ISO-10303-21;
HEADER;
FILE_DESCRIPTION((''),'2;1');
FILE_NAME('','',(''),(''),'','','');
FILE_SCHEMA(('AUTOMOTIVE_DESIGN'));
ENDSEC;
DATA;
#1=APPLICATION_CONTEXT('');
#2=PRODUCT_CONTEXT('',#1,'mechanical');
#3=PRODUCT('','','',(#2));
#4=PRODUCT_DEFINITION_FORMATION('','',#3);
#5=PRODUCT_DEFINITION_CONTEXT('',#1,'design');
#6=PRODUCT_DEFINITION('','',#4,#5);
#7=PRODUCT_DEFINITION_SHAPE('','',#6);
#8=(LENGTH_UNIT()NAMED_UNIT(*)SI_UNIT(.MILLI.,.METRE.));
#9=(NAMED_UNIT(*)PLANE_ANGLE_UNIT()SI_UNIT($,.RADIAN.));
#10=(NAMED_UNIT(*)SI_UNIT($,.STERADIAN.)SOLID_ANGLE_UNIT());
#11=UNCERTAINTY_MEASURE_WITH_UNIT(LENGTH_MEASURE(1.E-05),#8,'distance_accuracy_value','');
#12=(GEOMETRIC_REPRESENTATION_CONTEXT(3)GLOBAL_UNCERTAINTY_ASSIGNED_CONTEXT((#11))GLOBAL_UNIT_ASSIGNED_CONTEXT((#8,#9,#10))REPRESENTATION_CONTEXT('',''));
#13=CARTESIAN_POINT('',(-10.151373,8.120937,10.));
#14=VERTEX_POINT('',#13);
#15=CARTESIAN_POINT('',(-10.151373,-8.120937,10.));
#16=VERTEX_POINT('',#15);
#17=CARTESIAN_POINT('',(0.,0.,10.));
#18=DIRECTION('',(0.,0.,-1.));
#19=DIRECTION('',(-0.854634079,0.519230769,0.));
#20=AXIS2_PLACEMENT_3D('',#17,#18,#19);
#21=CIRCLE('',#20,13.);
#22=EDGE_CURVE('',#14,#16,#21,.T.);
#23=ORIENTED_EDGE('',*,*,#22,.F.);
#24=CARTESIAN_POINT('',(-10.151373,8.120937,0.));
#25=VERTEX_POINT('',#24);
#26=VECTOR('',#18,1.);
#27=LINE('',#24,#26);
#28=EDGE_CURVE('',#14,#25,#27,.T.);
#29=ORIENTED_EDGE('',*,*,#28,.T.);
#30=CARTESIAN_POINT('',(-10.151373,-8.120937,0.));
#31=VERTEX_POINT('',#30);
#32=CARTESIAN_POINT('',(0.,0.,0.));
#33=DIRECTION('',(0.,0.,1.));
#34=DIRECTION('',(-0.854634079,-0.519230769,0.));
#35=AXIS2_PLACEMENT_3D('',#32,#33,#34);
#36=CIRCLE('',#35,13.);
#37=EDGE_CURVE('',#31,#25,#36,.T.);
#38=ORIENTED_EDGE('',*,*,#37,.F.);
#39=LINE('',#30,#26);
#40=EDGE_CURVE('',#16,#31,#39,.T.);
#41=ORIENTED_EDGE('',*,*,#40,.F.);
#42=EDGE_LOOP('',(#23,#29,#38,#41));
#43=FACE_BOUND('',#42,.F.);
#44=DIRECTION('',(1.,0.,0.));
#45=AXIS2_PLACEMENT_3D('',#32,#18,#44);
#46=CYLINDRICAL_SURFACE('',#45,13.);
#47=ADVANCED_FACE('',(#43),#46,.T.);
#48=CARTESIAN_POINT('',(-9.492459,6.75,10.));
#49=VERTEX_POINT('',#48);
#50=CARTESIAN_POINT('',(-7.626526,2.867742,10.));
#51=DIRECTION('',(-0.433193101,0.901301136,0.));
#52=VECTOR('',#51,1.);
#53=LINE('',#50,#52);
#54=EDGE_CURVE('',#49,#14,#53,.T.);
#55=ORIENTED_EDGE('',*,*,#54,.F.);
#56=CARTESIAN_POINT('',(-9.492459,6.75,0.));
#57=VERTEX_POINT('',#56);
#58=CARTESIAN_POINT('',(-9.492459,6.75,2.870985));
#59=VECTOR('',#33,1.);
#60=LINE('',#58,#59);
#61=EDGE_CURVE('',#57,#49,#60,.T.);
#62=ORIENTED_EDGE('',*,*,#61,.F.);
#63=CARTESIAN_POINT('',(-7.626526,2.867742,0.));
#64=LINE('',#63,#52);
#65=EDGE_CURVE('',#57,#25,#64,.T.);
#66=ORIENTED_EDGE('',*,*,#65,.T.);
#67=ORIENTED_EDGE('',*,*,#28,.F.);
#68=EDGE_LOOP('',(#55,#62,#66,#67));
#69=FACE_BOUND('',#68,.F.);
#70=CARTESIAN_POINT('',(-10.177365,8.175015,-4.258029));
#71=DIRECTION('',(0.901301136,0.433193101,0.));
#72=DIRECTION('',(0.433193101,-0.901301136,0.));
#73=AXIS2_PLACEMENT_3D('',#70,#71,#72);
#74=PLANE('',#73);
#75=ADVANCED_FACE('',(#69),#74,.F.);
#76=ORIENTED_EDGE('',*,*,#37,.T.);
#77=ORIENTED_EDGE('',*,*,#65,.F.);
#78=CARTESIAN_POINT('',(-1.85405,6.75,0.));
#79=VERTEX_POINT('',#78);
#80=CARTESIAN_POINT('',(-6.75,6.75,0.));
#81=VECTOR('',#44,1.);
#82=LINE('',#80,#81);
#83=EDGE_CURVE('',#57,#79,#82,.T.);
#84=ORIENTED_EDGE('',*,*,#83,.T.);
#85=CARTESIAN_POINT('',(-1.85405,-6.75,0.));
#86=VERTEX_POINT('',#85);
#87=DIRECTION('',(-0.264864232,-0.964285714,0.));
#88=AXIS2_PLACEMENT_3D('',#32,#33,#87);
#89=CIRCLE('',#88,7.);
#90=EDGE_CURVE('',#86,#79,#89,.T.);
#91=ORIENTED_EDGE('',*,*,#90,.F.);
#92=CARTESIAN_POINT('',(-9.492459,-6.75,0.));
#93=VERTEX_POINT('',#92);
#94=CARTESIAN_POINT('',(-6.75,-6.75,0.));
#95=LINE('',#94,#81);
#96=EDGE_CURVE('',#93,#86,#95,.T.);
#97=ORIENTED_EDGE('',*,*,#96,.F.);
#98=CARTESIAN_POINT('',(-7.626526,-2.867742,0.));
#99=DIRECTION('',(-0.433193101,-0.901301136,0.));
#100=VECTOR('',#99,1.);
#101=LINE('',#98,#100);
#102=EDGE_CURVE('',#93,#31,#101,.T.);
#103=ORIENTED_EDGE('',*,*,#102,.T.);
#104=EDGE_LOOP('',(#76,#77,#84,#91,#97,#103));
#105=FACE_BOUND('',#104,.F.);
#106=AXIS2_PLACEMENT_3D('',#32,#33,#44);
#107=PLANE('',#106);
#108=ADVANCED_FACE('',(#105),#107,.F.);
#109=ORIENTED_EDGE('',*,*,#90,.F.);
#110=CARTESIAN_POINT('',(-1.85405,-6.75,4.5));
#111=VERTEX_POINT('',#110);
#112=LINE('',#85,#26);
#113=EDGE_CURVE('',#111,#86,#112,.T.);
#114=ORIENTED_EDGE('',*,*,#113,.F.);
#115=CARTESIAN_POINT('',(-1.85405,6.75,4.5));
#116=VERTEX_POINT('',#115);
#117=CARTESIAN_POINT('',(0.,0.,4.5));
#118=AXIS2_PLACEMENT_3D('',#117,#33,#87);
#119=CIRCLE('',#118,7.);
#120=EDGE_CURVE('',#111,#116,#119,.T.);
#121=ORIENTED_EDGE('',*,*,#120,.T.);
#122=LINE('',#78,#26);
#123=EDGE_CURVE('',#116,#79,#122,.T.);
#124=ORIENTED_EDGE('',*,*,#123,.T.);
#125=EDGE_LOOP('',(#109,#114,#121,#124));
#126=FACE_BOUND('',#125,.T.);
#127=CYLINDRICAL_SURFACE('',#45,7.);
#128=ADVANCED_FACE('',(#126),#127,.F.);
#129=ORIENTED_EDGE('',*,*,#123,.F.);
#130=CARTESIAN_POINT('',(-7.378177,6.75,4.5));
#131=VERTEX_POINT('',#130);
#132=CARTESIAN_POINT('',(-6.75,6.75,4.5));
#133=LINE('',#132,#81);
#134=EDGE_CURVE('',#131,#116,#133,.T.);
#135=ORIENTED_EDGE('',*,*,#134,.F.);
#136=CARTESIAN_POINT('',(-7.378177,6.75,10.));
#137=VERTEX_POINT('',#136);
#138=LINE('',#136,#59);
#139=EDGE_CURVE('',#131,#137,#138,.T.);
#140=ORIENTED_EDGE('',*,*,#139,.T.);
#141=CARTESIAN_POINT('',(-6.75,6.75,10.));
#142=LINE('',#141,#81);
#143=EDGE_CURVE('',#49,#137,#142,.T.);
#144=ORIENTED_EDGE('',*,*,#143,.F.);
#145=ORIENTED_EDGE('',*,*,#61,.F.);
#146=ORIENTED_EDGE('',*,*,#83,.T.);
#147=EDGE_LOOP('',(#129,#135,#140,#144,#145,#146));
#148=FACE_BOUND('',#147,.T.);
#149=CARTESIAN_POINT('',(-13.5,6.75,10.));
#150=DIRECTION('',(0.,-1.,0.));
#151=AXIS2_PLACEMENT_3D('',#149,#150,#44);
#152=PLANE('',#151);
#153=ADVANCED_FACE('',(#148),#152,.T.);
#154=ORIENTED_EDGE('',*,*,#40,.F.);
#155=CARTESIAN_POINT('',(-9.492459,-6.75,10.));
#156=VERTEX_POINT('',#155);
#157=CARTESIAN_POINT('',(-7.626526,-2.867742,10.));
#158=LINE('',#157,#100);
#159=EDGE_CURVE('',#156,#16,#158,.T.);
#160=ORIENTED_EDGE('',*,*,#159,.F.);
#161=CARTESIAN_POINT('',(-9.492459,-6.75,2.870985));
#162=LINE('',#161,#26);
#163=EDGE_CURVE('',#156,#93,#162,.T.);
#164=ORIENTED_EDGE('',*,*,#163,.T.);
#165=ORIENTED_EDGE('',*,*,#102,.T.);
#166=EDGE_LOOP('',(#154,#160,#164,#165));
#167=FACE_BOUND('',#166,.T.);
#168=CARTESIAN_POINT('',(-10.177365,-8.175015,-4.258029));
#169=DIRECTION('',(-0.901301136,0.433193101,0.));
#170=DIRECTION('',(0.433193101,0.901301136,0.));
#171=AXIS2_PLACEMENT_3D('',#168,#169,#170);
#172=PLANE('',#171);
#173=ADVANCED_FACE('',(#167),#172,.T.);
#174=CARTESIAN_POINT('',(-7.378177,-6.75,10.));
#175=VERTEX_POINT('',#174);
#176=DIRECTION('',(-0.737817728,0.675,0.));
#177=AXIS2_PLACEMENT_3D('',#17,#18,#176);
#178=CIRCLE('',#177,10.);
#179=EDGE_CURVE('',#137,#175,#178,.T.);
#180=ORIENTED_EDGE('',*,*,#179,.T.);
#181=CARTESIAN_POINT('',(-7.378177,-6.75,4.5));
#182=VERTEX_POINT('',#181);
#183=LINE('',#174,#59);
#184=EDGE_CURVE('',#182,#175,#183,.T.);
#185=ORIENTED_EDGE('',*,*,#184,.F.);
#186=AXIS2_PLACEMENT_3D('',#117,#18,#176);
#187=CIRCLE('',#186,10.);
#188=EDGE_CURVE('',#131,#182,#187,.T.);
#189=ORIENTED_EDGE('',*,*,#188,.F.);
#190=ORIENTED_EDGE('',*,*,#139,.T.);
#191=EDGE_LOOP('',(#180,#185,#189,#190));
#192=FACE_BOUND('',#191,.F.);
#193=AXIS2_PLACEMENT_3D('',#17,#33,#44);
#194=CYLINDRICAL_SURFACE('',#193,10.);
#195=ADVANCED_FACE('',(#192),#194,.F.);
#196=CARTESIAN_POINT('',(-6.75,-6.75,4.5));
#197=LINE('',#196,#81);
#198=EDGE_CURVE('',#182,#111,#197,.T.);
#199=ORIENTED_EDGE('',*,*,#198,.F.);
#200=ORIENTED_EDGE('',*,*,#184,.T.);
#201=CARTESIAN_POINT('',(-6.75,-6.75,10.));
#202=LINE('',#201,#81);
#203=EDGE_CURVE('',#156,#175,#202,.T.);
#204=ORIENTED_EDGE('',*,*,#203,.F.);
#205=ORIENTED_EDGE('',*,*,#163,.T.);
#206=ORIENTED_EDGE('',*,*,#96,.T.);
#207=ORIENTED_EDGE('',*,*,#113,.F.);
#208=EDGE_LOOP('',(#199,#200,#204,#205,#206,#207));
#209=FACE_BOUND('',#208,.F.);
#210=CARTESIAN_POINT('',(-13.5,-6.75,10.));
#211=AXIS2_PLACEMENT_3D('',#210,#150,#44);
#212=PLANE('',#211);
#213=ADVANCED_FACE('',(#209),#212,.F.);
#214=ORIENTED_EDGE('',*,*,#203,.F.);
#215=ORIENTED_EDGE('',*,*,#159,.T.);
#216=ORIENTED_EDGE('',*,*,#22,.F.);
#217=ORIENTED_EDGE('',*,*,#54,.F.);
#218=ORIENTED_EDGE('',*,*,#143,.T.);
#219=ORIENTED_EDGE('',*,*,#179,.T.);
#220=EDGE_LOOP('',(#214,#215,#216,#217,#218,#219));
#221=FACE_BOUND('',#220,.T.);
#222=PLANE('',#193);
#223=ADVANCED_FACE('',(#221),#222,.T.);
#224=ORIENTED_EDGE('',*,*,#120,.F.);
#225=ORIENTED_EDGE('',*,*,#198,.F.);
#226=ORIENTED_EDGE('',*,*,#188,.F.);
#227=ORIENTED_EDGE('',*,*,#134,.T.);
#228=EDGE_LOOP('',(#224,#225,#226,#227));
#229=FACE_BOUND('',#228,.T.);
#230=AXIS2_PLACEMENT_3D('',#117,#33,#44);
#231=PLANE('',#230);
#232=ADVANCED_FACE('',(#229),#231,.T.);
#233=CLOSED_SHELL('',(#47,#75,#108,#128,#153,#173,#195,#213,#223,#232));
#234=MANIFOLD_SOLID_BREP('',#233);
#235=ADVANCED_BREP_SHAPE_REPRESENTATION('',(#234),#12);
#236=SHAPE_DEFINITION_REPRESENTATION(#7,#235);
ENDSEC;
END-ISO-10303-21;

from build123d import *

# Parameters (mm, degrees)
F0_R        = 13
F0_R_2      = 7
F1_DEPTH    = 10
F2_R        = 10
F2_R_2      = 7
F3_DEPTH    = 5.5
F4_W        = 13.5
F4_H        = 13.5
F5_DEPTH    = 10.001
F6_T1_DEPTH = 18.5160584479


# Not quite as in the source:
# - a fillet or chamfer that OpenCascade refuses, or shapes differently, is made with other operations: its cross-section is extruded or revolved along the edge and cut away or added


with BuildPart() as f1:
    # F0 (on Top) → F1 (new body)
    with BuildSketch(Plane.XY):
        Circle(F0_R)
        Circle(F0_R_2, mode=Mode.SUBTRACT)
    extrude(amount=F1_DEPTH)

    # F2 (on face) → F3 (cut)
    with BuildSketch(Plane.XY.offset(10)):
        Circle(F2_R)
        Circle(F2_R_2, mode=Mode.SUBTRACT)
    extrude(amount=-F3_DEPTH, mode=Mode.SUBTRACT)

    # F4 (on face) → F5 (cut, through all)
    with BuildSketch(Plane.XY.offset(10)):
        with Locations((-6.75, 0)):
            Rectangle(F4_W, F4_H)
    extrude(amount=-F5_DEPTH, mode=Mode.SUBTRACT)

    # F6: chamfer of 1.5 on 2 edges, made by hand

    # F6_s2 → F6_t1 (cut)
    with BuildSketch(Plane.XY.offset(-4.2580292239)):
        with BuildLine():
            Line((-10.1773648706, 8.1750152332), (-9.4664670488, 6.6959219319))
            Line((-9.4664670488, 6.6959219319), (-9.4664670488, 6.6659219319))
            ThreePointArc((-9.4664670488, 6.6659219319), (-10.2883550352, 6.72), (-11.1102430216, 6.72))
            Line((-11.1102430216, 6.72), (-11.135882044, 6.7655769231))
            ThreePointArc((-11.135882044, 6.7655769231), (-10.669011075, 7.4801806583), (-10.2007911166, 8.1937558574))
            Line((-10.2007911166, 8.1937558574), (-10.1773648706, 8.1750152332))
        make_face()
        with BuildLine():
            Line((-10.1773648706, -8.1750152332), (-9.4664670488, -6.6959219319))
            Line((-9.4664670488, -6.6959219319), (-9.4664670488, -6.6659219319))
            ThreePointArc((-9.4664670488, -6.6659219319), (-10.2883550352, -6.72), (-11.1102430216, -6.72))
            Line((-11.1102430216, -6.72), (-11.135882044, -6.7655769231))
            ThreePointArc((-11.135882044, -6.7655769231), (-10.669011075, -7.4801806583), (-10.2007911166, -8.1937558574))
            Line((-10.2007911166, -8.1937558574), (-10.1773648706, -8.1750152332))
        make_face()
    extrude(amount=F6_T1_DEPTH, mode=Mode.SUBTRACT)


solid = f1.part
